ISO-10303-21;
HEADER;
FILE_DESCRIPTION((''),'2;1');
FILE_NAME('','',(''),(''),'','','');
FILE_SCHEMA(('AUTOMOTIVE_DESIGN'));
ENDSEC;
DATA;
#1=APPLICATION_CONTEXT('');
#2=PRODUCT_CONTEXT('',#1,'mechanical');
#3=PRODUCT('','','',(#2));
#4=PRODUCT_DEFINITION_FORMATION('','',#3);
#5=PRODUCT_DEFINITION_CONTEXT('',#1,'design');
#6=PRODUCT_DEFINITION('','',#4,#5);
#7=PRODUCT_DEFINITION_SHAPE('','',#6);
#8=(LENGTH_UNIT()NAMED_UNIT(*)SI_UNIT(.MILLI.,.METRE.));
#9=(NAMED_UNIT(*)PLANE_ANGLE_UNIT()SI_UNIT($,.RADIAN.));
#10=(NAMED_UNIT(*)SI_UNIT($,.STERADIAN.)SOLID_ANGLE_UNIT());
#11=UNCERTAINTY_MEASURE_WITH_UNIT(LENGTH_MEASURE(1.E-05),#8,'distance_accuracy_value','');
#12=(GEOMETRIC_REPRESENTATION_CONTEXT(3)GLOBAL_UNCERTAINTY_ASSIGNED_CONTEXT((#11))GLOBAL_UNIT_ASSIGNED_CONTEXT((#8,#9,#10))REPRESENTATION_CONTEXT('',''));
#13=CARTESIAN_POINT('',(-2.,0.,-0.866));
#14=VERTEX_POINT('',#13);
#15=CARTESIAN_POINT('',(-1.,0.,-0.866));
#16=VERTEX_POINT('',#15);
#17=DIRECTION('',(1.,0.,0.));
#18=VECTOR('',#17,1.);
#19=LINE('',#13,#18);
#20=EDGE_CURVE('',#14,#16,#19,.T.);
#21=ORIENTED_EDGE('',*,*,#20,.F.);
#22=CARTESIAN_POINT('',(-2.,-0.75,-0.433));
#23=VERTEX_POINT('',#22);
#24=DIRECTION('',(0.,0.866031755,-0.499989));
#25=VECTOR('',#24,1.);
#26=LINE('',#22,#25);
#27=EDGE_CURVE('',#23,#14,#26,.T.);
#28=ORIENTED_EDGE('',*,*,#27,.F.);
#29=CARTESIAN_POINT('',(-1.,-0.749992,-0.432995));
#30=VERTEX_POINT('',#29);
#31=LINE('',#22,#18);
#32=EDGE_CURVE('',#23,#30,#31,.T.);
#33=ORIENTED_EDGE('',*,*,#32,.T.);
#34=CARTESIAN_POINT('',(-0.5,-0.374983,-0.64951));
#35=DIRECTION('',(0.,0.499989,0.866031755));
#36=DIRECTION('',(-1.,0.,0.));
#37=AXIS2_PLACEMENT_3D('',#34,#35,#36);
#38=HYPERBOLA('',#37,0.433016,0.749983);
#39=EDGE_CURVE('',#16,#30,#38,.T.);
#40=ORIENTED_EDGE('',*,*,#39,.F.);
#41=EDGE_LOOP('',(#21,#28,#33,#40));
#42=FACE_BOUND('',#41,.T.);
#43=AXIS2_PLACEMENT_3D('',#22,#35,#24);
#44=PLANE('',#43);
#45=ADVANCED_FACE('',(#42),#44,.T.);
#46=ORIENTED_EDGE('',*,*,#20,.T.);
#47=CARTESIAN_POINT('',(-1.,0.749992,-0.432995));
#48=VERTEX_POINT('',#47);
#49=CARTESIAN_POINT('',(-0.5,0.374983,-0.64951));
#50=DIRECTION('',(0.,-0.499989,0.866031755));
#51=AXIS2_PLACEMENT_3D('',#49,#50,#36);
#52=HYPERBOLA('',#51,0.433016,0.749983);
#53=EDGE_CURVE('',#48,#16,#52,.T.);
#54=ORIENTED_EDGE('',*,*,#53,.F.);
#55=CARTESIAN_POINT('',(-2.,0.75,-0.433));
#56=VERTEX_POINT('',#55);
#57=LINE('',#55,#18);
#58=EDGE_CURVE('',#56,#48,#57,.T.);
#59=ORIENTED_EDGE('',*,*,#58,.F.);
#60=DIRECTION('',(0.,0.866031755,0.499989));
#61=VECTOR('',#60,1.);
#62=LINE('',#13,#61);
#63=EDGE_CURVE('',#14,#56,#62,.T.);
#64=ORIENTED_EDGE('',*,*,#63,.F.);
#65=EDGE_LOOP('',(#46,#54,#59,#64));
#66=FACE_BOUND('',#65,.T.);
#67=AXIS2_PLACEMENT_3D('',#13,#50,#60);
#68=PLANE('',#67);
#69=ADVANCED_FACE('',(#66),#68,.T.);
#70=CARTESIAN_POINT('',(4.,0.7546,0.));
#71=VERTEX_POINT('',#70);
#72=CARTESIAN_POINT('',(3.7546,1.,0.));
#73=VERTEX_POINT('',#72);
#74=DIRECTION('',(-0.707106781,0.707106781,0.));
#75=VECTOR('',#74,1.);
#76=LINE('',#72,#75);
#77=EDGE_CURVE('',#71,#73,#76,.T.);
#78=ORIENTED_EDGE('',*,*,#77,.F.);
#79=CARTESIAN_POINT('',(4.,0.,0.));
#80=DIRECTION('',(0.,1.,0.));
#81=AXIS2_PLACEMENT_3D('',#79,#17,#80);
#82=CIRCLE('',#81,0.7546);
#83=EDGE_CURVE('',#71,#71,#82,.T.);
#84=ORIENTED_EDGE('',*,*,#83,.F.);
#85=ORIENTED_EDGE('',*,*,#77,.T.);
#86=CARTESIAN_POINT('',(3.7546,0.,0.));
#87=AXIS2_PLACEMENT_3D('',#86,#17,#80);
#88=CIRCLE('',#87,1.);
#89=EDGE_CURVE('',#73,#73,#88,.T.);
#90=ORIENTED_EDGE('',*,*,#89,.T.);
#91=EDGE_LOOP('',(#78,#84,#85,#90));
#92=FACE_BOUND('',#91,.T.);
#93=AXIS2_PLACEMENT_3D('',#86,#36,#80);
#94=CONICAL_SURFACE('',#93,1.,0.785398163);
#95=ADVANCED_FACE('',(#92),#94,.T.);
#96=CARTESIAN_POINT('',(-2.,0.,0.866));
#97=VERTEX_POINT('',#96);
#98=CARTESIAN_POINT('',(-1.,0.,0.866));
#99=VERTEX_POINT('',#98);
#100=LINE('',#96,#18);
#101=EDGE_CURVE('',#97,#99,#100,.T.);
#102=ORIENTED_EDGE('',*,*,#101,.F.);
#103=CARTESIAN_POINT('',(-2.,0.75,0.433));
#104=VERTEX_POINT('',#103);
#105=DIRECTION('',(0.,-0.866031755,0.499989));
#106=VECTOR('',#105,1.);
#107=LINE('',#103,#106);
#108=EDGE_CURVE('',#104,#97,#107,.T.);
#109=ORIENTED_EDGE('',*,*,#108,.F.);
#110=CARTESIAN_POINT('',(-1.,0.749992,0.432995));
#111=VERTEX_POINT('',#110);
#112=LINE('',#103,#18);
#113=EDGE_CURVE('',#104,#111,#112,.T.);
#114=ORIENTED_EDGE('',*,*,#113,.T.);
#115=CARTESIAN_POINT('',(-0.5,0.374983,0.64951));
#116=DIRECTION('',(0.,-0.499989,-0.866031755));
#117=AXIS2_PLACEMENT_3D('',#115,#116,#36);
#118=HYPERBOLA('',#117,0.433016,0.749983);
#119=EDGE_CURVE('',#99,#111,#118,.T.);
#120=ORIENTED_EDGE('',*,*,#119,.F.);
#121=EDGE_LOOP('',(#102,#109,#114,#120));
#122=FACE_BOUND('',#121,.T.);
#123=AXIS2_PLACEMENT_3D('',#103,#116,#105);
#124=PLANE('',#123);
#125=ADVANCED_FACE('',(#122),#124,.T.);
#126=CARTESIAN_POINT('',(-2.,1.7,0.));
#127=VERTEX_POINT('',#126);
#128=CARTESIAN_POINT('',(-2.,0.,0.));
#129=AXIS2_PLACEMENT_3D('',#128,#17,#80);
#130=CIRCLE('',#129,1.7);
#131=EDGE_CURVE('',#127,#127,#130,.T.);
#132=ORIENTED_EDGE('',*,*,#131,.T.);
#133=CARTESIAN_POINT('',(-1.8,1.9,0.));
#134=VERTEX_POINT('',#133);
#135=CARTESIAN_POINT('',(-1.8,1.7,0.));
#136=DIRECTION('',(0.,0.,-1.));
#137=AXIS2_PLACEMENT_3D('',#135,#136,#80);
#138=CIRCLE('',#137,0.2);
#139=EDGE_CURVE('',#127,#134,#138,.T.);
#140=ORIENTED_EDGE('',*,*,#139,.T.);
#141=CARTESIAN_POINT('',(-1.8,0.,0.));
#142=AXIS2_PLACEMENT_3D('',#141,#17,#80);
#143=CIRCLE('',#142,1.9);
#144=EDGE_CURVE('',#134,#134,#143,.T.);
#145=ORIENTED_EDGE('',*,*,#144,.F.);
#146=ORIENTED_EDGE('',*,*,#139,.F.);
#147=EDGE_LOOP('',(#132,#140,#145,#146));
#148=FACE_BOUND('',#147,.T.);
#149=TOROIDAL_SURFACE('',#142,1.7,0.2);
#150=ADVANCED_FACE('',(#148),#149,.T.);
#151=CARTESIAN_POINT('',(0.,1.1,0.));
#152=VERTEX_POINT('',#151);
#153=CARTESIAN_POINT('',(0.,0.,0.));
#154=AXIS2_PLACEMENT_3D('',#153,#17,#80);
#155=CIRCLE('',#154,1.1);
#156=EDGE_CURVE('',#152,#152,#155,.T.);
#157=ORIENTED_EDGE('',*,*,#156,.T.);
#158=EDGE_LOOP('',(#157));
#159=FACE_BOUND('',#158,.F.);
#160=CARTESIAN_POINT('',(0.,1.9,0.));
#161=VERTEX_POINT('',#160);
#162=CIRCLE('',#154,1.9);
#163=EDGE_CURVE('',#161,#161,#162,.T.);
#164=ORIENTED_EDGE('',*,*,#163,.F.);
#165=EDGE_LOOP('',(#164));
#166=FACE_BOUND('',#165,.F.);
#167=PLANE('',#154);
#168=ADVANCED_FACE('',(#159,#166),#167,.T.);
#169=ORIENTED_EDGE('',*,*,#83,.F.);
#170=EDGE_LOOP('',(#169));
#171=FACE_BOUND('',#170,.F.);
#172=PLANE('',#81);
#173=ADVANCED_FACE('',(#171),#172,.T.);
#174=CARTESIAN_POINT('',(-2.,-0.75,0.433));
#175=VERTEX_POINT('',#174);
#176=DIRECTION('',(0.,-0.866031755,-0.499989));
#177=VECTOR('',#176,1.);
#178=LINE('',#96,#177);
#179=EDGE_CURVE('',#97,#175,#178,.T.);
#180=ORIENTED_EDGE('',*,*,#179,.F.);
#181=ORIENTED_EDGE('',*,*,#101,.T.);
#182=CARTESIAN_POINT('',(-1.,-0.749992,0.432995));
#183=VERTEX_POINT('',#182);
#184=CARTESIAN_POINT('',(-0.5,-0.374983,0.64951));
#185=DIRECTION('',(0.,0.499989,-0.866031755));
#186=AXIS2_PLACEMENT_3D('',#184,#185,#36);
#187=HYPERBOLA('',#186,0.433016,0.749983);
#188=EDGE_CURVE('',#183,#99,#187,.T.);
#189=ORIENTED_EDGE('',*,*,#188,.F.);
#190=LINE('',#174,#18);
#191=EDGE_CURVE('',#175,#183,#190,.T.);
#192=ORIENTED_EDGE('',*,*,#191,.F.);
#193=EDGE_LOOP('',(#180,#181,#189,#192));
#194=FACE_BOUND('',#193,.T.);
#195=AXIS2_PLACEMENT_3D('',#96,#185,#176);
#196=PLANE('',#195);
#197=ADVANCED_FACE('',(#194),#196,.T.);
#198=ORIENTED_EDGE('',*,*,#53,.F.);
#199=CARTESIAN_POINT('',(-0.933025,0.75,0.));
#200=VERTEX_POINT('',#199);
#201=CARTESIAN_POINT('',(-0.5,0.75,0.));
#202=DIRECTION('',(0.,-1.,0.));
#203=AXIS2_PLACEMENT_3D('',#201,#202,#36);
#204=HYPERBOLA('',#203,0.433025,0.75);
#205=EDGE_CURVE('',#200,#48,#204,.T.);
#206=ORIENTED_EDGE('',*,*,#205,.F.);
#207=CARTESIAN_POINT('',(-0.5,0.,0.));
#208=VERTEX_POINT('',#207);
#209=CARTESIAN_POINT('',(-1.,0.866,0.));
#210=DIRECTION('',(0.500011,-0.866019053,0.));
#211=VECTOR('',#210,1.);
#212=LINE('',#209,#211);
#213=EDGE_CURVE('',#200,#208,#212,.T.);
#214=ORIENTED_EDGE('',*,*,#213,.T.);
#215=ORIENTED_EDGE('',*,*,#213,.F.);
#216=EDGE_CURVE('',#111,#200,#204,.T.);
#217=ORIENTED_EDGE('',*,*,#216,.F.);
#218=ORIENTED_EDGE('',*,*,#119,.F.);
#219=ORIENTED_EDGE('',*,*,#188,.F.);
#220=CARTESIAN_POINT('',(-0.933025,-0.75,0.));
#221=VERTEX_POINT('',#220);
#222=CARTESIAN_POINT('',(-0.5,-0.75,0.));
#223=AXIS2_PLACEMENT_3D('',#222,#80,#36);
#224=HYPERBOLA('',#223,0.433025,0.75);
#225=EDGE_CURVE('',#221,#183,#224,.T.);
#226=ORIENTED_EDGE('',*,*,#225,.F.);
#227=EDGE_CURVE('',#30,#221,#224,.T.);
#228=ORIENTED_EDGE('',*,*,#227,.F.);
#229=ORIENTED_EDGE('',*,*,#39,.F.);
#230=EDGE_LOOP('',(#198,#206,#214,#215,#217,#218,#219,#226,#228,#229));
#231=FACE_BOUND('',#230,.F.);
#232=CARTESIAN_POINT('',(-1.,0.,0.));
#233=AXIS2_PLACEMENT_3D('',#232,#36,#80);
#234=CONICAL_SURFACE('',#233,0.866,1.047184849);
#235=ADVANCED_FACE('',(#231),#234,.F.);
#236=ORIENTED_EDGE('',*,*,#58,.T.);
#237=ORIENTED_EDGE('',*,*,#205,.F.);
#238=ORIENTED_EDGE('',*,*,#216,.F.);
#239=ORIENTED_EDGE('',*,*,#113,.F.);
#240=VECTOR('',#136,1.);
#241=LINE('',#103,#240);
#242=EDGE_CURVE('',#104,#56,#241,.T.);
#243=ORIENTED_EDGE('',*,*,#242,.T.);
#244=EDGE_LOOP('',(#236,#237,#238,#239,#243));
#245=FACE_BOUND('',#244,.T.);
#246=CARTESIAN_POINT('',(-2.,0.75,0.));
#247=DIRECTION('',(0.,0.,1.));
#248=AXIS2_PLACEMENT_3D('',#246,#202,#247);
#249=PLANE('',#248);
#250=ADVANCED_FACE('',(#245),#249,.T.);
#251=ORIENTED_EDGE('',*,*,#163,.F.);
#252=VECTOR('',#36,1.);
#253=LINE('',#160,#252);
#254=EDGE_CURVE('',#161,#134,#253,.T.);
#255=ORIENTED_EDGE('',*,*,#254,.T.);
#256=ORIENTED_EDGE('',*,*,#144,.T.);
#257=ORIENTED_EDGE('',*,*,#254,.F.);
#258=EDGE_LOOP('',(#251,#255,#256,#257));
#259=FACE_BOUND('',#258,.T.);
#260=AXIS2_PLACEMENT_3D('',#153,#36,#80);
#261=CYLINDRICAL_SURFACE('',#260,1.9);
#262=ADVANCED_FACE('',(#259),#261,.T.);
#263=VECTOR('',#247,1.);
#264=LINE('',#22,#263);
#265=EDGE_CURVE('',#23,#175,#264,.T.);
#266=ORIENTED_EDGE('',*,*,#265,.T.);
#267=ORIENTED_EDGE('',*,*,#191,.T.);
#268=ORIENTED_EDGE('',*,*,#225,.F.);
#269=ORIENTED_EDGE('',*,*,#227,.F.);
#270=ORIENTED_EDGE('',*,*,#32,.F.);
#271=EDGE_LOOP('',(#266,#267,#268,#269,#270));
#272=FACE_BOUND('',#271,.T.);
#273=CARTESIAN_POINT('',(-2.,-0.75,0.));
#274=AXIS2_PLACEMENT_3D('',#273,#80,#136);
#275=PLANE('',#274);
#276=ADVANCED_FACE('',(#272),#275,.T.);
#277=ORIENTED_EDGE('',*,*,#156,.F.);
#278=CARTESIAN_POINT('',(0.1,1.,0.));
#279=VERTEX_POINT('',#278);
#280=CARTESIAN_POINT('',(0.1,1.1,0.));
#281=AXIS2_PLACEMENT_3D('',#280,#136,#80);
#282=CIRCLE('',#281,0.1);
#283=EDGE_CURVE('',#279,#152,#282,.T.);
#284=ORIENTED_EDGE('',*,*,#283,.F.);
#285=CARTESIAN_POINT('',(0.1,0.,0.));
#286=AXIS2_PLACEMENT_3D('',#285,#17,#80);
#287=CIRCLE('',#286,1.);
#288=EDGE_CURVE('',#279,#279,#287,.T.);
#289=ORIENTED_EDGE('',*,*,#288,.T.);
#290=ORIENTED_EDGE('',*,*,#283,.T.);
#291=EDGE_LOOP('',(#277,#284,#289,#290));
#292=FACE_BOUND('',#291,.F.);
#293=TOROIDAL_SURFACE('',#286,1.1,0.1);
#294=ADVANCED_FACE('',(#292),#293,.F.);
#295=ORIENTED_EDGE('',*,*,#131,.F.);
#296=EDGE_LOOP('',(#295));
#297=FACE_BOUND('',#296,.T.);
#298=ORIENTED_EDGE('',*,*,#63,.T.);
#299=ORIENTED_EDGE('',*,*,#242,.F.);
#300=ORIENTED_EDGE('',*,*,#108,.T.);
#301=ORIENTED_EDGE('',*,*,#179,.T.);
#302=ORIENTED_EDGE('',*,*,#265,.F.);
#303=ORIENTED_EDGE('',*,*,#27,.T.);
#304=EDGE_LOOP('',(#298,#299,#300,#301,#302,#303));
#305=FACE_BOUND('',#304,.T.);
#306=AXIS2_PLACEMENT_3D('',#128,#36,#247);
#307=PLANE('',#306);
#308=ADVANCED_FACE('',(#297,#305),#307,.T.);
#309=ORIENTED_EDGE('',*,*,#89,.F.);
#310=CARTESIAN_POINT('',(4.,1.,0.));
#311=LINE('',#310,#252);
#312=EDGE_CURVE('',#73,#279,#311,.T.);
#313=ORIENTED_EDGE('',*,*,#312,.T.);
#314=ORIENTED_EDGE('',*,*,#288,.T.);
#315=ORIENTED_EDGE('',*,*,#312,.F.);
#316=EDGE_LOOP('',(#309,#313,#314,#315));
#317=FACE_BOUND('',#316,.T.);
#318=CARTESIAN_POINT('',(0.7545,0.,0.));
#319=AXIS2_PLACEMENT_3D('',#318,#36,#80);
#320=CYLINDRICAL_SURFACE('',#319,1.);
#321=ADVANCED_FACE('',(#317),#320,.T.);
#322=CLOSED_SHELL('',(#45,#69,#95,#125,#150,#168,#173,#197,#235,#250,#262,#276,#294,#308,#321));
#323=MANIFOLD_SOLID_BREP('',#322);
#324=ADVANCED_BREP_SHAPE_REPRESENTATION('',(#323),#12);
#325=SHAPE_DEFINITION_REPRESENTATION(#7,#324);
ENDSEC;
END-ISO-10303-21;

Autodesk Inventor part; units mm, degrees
ref_plane "YZ Plane" through (0, 0, 0) normal (1, 0, 0) x (0, 1, 0)
ref_plane "XZ Plane" through (0, 0, 0) normal (0, 1, 0) x (-1, 0, 0)
sketch "Skizze1" plane through (0, 0, 0) normal (0, 0, 1) x (1, 0, 0)
  line L0 (-0.5, 0) -> (4, 0)
  line L1 (4, 0) -> (4, 1)
  line L2 (4, 1) -> (1, 1)
  line L3 (1, 1) -> (0.7545, 1)
  line L4 (0.7545, 1) -> (0, 1)
  line L5 (0, 1) -> (0, 1.9)
  line L6 (0, 1.9) -> (-2, 1.9)
  line L7 (-2, 1.9) -> (-2, 0.866)
  line L8 (-2, 0.866) -> (-1, 0.866)
  line L9 (-1, 0.866) -> (-0.5, 0)
  line L10 (-3.2, 0) -> (5.2, 0) projected
  line L11 (0, -0.38) -> (0, 2.28) projected
  line L12 (1, 1) -> (0, 1) construction
  dimension "d1" = 3
  dimension "d2" = 0.2455
  dimension "d3" = 2
  dimension "d4" = 1
  dimension "d5" = 60
  dimension "d6" = 2
  dimension "d7" = 2
  dimension "d8" = 1.7321
  dimension "d9" = 3.8
  dimension "d26" = 4
revolve "Körper" add sketch "Skizze1" angle 360 about axis through (-0.5, 0, 0) along (1, 0, 0)
sketch "Skizze2" plane through (-2, 0, 0) normal (-1, 0, 0) x (0, 0, 1)
  circle A0 centre (0, 0) radius 0.866 projected
  line L0 (0, -2.66) -> (0, 2.66) projected
  line L1 (-2.66, 0) -> (2.66, 0) projected
  line L2 (0.866, 0) -> (0.433, -0.75)
  line L3 (0.433, -0.75) -> (-0.433, -0.75)
  line L4 (-0.433, -0.75) -> (-0.866, 0)
  line L5 (-0.866, 0) -> (-0.433, 0.75)
  line L6 (-0.433, 0.75) -> (0.433, 0.75)
  line L7 (0.433, 0.75) -> (0.866, 0)
extrude "Loch" add sketch "Skizze2" against normal up to next contours L7 A0 | A0 L2 | L6 L0 A0 | A0 L0 L3 | L0 L6 A0 | A0 L3 L0 | L4 A0 | A0 L5
fillet "Rundung1" radius 0.2 1 edges at (-2, -1.9, 0)
thread "Gewinde" size "M2x0.4" class "6g" standard "ISO Metric profile" length 3
chamfer "Fase1" distance 0.2454 distance2 0.2454 1 edges at (4, -1, 0) measured on face at (4, -0.4588, -0.3309)
ref_plane "Work Plane1" through (29, 0, 0) normal (0, -1, 0) x (1, 0, 0)
fillet "Fillet2" radius 0.1 1 edges at (0, -1, 0)
equation "\"d1\" = GEL"
equation "\"d3\" = KOH"
equation "\"d4\" = INTI"
equation "\"d6\" = GD"
equation "\"d7\" = BDM"
equation "\"d8\" = 1.1547 * SW"
equation "\"d9\" = KOD"
equation "\"d26\" = NLG"
equation "\"d30\" = R"
equation "\"d17\" = RR"
equation "\"d13\" = GEL"
equation "\"d15\" = -0.5 * SPD + 0.5 * GD"
equation "\"d16\" = GUL"
equation "\"GD\" = NND"
equation "\"NLG\" = 4"
equation "\"GEL\" = 3"
equation "\"KOD\" = 3.8"
equation "\"KOH\" = 2"
equation "\"INTI\" = 1"
equation "\"GAL\" = 0.61345 * PTC"
equation "\"GUL\" = 0.61345 * PTC"
equation "\"BDM\" = NND"
equation "\"SW\" = 1.5"
equation "\"RR\" = 0.2"
equation "\"SPD\" = NND - 1.2269 * PTC"
equation "\"R\" = 0.1"
equation "\"TOA\" = 30deg"
equation "\"GD1\" = THREADDIA - 1.2269 * PTC"
equation "\"THREADDIA\" = 2"
equation "\"FAWI\" = 45deg"
equation "\"ANG\" = 120deg"
equation "\"PTC\" = 0.4"
equation "\"NND\" = 2"
equation "\"E0\" = 1.155 * SW"
properties part number "DIN 912 - M2 x 4" material "Stahl, weich"
